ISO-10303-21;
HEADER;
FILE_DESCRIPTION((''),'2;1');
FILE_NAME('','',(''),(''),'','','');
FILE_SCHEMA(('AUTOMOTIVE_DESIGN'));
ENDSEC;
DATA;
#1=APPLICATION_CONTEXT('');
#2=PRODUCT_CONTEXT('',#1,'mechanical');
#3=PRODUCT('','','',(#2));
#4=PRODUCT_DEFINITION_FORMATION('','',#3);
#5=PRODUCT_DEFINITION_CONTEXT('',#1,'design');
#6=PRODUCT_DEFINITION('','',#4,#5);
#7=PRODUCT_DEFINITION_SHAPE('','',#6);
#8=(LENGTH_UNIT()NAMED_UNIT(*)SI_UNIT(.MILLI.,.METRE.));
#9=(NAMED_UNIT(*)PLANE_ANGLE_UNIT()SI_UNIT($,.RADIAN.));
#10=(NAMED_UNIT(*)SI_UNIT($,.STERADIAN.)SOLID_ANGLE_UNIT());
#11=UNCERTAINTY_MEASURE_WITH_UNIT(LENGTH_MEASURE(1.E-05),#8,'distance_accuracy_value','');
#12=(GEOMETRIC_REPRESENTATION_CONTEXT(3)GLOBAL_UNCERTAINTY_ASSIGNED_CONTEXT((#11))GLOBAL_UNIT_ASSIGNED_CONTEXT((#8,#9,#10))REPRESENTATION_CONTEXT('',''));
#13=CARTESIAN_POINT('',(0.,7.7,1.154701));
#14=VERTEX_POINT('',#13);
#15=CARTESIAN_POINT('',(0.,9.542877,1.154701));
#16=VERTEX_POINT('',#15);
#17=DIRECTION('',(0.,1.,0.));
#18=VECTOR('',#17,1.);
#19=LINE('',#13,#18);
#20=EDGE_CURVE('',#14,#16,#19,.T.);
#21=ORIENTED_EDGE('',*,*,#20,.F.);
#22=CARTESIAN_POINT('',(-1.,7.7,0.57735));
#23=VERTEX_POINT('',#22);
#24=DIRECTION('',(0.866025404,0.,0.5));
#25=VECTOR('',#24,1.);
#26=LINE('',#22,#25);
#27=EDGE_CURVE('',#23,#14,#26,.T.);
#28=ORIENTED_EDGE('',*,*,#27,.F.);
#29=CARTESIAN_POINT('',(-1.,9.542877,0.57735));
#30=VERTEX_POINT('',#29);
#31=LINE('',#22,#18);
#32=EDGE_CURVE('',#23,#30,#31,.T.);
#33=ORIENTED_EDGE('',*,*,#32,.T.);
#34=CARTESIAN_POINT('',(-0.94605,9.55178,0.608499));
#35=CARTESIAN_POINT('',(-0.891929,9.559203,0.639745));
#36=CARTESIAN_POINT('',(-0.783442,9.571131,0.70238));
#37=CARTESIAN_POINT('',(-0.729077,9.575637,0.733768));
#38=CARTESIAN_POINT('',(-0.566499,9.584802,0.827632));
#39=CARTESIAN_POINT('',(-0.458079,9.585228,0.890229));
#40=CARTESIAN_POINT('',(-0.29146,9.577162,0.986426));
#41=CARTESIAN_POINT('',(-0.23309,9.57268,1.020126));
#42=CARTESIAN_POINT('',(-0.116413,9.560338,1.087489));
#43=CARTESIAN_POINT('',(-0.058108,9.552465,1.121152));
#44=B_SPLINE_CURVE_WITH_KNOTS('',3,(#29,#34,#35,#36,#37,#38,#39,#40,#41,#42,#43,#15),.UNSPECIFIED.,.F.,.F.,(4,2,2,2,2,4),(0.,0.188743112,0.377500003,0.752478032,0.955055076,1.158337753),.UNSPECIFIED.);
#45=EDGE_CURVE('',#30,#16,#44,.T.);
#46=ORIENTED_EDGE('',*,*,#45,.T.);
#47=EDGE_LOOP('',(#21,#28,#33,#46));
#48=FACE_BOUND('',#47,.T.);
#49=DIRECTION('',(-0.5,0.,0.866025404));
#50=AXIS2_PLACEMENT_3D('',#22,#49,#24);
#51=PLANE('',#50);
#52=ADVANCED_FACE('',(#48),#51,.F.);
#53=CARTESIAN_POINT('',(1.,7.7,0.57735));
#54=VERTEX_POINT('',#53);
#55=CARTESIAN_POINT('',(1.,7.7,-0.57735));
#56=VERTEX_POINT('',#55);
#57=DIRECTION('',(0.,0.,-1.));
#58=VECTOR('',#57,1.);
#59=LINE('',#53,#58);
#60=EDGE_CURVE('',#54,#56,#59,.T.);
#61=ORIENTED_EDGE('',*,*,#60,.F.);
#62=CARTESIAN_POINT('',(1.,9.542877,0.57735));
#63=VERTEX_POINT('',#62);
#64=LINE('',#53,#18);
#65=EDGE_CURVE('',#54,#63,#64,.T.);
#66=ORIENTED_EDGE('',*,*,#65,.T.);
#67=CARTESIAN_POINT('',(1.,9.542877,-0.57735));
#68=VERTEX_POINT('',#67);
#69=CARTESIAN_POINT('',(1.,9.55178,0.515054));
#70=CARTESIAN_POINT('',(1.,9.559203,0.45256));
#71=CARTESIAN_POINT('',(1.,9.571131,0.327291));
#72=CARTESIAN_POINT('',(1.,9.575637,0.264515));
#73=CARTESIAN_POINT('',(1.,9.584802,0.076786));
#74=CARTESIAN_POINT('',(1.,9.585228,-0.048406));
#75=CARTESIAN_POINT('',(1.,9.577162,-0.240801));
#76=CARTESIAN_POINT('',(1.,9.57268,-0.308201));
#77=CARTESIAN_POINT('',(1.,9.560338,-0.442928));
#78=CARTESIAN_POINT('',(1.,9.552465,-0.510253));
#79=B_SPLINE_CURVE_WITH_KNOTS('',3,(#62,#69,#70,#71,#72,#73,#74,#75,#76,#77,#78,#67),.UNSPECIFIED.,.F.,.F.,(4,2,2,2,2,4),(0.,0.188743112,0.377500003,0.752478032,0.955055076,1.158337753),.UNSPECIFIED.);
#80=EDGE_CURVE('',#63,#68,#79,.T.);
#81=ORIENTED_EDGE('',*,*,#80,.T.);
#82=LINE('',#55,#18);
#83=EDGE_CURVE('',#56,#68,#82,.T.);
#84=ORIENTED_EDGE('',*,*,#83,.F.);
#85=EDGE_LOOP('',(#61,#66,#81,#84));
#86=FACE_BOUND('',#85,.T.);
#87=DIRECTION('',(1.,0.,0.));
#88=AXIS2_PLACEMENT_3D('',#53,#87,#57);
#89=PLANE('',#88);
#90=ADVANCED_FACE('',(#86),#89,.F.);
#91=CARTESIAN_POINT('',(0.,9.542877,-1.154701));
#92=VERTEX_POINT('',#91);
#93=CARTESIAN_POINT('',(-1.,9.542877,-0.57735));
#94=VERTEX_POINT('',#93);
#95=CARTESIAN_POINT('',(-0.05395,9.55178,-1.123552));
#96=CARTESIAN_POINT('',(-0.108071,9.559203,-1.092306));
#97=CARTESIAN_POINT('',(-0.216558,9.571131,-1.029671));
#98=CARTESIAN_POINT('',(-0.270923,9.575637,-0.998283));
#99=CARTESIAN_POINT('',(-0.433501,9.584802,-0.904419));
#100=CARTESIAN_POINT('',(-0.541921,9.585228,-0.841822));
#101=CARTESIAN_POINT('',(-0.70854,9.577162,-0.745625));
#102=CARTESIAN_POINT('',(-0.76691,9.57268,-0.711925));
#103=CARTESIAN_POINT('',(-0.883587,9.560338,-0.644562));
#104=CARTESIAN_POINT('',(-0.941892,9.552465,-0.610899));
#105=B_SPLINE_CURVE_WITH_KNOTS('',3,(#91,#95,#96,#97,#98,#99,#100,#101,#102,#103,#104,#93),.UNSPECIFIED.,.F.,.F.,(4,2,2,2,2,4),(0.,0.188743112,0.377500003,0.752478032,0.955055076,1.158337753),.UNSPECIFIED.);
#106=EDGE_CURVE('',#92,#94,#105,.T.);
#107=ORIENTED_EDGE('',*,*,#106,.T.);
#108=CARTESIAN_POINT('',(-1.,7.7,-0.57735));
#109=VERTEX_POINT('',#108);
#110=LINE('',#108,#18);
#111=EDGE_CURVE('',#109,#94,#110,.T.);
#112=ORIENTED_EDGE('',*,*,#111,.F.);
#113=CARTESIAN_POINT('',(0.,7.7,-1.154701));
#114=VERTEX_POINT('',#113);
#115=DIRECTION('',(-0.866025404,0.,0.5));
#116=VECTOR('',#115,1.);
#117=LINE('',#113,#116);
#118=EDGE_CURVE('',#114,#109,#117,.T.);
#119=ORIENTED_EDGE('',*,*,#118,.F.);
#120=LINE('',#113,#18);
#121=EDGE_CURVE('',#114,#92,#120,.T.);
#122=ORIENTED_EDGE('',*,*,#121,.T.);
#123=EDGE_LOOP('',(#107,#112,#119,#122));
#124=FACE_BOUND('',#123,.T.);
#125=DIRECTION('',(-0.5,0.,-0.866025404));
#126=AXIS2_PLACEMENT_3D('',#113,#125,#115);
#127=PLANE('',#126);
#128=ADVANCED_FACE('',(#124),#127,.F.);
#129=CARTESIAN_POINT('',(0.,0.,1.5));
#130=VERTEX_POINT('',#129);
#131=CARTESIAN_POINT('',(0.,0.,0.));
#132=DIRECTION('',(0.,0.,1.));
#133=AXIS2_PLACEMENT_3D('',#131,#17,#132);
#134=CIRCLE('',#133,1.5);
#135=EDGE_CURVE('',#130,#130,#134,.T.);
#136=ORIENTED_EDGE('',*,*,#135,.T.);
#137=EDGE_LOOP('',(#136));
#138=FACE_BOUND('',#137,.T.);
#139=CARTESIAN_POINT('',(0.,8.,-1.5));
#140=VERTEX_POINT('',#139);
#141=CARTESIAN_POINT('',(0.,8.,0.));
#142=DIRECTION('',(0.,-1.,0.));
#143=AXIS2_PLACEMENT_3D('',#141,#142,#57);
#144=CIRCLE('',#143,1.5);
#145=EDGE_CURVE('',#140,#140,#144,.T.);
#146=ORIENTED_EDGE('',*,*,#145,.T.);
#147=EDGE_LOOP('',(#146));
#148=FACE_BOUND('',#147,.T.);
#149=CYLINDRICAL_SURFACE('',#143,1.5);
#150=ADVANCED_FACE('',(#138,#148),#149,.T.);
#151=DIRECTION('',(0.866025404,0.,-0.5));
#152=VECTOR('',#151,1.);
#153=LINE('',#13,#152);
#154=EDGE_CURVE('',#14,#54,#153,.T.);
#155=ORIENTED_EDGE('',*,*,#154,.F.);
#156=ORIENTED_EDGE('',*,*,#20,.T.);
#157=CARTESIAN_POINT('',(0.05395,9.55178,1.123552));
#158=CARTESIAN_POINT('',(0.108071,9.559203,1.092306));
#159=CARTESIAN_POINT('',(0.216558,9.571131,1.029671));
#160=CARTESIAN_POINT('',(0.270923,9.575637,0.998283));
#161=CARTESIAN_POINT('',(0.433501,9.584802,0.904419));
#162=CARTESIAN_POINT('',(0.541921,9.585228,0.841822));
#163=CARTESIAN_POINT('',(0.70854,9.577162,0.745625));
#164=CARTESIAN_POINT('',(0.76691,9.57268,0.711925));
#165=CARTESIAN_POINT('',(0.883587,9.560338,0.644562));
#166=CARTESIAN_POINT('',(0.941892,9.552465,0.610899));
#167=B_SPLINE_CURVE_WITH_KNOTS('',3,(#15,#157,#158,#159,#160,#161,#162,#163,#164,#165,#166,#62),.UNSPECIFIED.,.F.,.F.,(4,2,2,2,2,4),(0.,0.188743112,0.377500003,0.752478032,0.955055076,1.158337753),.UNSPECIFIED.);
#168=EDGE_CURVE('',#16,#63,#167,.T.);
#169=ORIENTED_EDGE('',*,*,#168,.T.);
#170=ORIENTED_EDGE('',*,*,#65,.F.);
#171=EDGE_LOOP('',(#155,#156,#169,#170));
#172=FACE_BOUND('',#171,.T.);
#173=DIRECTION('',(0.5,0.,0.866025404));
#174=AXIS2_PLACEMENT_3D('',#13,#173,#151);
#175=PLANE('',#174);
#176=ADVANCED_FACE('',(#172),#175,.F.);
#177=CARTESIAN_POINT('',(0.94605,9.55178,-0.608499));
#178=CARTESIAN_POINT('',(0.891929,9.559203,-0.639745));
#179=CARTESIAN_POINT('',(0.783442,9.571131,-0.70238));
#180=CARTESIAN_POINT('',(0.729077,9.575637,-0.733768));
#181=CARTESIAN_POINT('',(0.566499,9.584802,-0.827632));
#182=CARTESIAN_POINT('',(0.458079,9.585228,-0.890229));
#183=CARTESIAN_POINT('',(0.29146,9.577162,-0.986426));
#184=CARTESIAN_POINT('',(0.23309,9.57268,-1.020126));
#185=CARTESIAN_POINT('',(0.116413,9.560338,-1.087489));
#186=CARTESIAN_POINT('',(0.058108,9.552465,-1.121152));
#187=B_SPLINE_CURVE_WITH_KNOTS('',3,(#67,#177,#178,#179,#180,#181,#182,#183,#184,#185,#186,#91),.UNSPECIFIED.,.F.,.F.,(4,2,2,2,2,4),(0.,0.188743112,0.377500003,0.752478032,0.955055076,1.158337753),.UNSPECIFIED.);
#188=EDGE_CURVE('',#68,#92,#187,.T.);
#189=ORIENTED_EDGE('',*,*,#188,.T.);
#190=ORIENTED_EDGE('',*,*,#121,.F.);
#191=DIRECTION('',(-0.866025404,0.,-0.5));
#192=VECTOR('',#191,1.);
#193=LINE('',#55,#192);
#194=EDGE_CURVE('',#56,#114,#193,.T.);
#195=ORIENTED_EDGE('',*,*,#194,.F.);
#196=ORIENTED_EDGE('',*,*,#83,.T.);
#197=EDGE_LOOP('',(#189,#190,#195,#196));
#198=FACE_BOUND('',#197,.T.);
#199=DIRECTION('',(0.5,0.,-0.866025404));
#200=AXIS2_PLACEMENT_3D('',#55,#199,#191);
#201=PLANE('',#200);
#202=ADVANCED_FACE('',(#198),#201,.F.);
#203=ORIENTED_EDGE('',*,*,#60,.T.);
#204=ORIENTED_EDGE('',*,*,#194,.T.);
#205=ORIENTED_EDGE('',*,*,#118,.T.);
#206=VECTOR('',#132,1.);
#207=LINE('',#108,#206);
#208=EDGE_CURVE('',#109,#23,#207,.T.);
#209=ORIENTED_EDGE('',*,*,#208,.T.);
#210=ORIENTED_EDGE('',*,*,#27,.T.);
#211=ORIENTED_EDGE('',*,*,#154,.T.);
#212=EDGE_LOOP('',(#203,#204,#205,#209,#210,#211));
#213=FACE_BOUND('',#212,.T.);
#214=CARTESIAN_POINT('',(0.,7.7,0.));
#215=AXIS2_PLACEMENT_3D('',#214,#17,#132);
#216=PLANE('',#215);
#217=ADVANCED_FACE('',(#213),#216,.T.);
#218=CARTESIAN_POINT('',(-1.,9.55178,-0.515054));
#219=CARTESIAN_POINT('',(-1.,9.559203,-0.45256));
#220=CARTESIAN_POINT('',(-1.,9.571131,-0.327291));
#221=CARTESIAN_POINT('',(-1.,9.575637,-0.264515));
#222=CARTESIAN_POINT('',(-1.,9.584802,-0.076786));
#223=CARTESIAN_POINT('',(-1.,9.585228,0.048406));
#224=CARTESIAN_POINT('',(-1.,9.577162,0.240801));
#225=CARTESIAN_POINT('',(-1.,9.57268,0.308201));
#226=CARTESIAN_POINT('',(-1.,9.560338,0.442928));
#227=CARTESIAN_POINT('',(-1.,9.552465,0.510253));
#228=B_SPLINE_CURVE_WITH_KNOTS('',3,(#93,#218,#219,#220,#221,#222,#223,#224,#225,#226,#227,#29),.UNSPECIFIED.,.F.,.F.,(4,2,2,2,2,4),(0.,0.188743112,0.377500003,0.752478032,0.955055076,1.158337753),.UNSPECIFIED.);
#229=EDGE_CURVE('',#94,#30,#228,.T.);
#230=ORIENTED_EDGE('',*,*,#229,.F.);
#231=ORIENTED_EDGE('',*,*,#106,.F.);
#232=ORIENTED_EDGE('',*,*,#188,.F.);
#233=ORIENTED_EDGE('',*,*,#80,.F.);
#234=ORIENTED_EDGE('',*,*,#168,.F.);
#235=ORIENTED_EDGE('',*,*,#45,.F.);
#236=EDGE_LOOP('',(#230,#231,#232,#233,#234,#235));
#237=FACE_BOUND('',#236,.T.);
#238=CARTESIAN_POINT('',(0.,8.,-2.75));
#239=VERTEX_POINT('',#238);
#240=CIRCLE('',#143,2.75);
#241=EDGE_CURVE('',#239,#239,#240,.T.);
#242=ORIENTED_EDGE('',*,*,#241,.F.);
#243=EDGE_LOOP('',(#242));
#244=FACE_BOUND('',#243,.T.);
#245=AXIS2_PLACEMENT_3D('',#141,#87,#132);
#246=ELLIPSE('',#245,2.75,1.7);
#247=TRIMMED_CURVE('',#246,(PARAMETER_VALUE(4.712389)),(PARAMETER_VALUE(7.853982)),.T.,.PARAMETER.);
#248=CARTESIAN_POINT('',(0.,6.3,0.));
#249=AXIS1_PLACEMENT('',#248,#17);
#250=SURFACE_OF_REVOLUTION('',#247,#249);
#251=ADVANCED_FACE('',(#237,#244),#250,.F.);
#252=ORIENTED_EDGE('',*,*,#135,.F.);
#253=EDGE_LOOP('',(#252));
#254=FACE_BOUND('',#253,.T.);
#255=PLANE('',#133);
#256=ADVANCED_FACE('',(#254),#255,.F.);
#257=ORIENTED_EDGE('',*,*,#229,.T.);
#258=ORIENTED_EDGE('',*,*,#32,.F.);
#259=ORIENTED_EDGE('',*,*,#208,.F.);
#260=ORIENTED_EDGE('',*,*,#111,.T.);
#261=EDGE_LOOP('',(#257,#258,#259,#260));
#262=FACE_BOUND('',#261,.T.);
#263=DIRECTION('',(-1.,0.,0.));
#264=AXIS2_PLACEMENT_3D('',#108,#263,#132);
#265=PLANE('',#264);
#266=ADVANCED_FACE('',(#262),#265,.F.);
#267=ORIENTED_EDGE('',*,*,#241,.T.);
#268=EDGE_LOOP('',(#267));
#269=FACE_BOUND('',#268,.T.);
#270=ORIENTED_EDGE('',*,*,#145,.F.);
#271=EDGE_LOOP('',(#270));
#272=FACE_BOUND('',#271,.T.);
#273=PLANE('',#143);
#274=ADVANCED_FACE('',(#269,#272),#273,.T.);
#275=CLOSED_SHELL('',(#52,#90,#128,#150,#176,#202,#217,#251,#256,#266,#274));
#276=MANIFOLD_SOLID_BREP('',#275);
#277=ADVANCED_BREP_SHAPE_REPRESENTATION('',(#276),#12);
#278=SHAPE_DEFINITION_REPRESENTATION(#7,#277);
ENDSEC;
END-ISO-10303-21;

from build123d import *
from build123d.topology import SkipClean

# Parameters (mm, degrees)
SKETCH1_R           = 1.5
BOSS_EXTRUDE1_DEPTH = 8
SKETCH2_R           = 2.75
BOSS_EXTRUDE2_DEPTH = 0.1
SKETCH3_R           = 2.75
SKETCH3_R_2         = 1.5
CUT_EXTRUDE1_DEPTH  = 0.1
CUT_EXTRUDE2_DEPTH  = 2


# Read off the part's stored shape, not the designer's step: Dome1
with BuildPart() as part:
    # Sketch1 → Boss-Extrude1 (new body)
    with BuildSketch(Plane(origin=(0, 0, 0), x_dir=(1, 0, 0), z_dir=(0, 1, 0))):
        with Locations(Location((0, 0, 0), (0, 0, 270))):
            Circle(SKETCH1_R)
    extrude(amount=BOSS_EXTRUDE1_DEPTH)

    # Sketch2 → Boss-Extrude2 (add)
    with BuildSketch(Plane(origin=(0, 8, 0), x_dir=(1, 0, 0), z_dir=(0, 1, 0))):
        with Locations(Location((0, 0, 0), (0, 0, 270))):
            Circle(SKETCH2_R)
    extrude(amount=-BOSS_EXTRUDE2_DEPTH)

    # Dome1 outline → Dome1 (revolve)
    with BuildSketch(Plane.XY):
        with BuildLine():
            add(Edge.make_bspline(
                [(0, 9.7), (2.75, 9.7), (2.75, 8)],
                knots=[4.71238898, 4.71238898, 4.71238898, 6.283185307, 6.283185307, 6.283185307], degree=2, weights=[1, 0.707106781, 1]))
            Line((0, 9.7), (0, 8))
            Line((0, 8), (2.75, 8))
        make_face()
    revolve(axis=Axis((0, 0, 0), (0, 1, 0)))

    # Sketch3 → Cut-Extrude1 (cut)
    with SkipClean():  # the faces are left unmerged after this step: merging them gives an invalid solid
        with BuildSketch(Plane.XZ.offset(-7.9)):
            Circle(SKETCH3_R)
            with Locations(Location((0, 0, 0), (0, 0, 270))):
                Circle(SKETCH3_R_2, mode=Mode.SUBTRACT)
        extrude(amount=-CUT_EXTRUDE1_DEPTH, mode=Mode.SUBTRACT)

    # Sketch4 → Cut-Extrude2 (cut)
    with SkipClean():  # the faces are left unmerged after this step: merging them gives an invalid solid
        with BuildSketch(Plane(origin=(0, 9.7, 0), x_dir=(1, 0, 0), z_dir=(0, 1, 0))):
            Polygon((0, 1.154700538), (-1, 0.577350269), (-1, -0.577350269), (0, -1.154700538), (1, -0.577350269), (1, 0.577350269), align=None)
        extrude(amount=-CUT_EXTRUDE2_DEPTH, mode=Mode.SUBTRACT)


solid = part.part
